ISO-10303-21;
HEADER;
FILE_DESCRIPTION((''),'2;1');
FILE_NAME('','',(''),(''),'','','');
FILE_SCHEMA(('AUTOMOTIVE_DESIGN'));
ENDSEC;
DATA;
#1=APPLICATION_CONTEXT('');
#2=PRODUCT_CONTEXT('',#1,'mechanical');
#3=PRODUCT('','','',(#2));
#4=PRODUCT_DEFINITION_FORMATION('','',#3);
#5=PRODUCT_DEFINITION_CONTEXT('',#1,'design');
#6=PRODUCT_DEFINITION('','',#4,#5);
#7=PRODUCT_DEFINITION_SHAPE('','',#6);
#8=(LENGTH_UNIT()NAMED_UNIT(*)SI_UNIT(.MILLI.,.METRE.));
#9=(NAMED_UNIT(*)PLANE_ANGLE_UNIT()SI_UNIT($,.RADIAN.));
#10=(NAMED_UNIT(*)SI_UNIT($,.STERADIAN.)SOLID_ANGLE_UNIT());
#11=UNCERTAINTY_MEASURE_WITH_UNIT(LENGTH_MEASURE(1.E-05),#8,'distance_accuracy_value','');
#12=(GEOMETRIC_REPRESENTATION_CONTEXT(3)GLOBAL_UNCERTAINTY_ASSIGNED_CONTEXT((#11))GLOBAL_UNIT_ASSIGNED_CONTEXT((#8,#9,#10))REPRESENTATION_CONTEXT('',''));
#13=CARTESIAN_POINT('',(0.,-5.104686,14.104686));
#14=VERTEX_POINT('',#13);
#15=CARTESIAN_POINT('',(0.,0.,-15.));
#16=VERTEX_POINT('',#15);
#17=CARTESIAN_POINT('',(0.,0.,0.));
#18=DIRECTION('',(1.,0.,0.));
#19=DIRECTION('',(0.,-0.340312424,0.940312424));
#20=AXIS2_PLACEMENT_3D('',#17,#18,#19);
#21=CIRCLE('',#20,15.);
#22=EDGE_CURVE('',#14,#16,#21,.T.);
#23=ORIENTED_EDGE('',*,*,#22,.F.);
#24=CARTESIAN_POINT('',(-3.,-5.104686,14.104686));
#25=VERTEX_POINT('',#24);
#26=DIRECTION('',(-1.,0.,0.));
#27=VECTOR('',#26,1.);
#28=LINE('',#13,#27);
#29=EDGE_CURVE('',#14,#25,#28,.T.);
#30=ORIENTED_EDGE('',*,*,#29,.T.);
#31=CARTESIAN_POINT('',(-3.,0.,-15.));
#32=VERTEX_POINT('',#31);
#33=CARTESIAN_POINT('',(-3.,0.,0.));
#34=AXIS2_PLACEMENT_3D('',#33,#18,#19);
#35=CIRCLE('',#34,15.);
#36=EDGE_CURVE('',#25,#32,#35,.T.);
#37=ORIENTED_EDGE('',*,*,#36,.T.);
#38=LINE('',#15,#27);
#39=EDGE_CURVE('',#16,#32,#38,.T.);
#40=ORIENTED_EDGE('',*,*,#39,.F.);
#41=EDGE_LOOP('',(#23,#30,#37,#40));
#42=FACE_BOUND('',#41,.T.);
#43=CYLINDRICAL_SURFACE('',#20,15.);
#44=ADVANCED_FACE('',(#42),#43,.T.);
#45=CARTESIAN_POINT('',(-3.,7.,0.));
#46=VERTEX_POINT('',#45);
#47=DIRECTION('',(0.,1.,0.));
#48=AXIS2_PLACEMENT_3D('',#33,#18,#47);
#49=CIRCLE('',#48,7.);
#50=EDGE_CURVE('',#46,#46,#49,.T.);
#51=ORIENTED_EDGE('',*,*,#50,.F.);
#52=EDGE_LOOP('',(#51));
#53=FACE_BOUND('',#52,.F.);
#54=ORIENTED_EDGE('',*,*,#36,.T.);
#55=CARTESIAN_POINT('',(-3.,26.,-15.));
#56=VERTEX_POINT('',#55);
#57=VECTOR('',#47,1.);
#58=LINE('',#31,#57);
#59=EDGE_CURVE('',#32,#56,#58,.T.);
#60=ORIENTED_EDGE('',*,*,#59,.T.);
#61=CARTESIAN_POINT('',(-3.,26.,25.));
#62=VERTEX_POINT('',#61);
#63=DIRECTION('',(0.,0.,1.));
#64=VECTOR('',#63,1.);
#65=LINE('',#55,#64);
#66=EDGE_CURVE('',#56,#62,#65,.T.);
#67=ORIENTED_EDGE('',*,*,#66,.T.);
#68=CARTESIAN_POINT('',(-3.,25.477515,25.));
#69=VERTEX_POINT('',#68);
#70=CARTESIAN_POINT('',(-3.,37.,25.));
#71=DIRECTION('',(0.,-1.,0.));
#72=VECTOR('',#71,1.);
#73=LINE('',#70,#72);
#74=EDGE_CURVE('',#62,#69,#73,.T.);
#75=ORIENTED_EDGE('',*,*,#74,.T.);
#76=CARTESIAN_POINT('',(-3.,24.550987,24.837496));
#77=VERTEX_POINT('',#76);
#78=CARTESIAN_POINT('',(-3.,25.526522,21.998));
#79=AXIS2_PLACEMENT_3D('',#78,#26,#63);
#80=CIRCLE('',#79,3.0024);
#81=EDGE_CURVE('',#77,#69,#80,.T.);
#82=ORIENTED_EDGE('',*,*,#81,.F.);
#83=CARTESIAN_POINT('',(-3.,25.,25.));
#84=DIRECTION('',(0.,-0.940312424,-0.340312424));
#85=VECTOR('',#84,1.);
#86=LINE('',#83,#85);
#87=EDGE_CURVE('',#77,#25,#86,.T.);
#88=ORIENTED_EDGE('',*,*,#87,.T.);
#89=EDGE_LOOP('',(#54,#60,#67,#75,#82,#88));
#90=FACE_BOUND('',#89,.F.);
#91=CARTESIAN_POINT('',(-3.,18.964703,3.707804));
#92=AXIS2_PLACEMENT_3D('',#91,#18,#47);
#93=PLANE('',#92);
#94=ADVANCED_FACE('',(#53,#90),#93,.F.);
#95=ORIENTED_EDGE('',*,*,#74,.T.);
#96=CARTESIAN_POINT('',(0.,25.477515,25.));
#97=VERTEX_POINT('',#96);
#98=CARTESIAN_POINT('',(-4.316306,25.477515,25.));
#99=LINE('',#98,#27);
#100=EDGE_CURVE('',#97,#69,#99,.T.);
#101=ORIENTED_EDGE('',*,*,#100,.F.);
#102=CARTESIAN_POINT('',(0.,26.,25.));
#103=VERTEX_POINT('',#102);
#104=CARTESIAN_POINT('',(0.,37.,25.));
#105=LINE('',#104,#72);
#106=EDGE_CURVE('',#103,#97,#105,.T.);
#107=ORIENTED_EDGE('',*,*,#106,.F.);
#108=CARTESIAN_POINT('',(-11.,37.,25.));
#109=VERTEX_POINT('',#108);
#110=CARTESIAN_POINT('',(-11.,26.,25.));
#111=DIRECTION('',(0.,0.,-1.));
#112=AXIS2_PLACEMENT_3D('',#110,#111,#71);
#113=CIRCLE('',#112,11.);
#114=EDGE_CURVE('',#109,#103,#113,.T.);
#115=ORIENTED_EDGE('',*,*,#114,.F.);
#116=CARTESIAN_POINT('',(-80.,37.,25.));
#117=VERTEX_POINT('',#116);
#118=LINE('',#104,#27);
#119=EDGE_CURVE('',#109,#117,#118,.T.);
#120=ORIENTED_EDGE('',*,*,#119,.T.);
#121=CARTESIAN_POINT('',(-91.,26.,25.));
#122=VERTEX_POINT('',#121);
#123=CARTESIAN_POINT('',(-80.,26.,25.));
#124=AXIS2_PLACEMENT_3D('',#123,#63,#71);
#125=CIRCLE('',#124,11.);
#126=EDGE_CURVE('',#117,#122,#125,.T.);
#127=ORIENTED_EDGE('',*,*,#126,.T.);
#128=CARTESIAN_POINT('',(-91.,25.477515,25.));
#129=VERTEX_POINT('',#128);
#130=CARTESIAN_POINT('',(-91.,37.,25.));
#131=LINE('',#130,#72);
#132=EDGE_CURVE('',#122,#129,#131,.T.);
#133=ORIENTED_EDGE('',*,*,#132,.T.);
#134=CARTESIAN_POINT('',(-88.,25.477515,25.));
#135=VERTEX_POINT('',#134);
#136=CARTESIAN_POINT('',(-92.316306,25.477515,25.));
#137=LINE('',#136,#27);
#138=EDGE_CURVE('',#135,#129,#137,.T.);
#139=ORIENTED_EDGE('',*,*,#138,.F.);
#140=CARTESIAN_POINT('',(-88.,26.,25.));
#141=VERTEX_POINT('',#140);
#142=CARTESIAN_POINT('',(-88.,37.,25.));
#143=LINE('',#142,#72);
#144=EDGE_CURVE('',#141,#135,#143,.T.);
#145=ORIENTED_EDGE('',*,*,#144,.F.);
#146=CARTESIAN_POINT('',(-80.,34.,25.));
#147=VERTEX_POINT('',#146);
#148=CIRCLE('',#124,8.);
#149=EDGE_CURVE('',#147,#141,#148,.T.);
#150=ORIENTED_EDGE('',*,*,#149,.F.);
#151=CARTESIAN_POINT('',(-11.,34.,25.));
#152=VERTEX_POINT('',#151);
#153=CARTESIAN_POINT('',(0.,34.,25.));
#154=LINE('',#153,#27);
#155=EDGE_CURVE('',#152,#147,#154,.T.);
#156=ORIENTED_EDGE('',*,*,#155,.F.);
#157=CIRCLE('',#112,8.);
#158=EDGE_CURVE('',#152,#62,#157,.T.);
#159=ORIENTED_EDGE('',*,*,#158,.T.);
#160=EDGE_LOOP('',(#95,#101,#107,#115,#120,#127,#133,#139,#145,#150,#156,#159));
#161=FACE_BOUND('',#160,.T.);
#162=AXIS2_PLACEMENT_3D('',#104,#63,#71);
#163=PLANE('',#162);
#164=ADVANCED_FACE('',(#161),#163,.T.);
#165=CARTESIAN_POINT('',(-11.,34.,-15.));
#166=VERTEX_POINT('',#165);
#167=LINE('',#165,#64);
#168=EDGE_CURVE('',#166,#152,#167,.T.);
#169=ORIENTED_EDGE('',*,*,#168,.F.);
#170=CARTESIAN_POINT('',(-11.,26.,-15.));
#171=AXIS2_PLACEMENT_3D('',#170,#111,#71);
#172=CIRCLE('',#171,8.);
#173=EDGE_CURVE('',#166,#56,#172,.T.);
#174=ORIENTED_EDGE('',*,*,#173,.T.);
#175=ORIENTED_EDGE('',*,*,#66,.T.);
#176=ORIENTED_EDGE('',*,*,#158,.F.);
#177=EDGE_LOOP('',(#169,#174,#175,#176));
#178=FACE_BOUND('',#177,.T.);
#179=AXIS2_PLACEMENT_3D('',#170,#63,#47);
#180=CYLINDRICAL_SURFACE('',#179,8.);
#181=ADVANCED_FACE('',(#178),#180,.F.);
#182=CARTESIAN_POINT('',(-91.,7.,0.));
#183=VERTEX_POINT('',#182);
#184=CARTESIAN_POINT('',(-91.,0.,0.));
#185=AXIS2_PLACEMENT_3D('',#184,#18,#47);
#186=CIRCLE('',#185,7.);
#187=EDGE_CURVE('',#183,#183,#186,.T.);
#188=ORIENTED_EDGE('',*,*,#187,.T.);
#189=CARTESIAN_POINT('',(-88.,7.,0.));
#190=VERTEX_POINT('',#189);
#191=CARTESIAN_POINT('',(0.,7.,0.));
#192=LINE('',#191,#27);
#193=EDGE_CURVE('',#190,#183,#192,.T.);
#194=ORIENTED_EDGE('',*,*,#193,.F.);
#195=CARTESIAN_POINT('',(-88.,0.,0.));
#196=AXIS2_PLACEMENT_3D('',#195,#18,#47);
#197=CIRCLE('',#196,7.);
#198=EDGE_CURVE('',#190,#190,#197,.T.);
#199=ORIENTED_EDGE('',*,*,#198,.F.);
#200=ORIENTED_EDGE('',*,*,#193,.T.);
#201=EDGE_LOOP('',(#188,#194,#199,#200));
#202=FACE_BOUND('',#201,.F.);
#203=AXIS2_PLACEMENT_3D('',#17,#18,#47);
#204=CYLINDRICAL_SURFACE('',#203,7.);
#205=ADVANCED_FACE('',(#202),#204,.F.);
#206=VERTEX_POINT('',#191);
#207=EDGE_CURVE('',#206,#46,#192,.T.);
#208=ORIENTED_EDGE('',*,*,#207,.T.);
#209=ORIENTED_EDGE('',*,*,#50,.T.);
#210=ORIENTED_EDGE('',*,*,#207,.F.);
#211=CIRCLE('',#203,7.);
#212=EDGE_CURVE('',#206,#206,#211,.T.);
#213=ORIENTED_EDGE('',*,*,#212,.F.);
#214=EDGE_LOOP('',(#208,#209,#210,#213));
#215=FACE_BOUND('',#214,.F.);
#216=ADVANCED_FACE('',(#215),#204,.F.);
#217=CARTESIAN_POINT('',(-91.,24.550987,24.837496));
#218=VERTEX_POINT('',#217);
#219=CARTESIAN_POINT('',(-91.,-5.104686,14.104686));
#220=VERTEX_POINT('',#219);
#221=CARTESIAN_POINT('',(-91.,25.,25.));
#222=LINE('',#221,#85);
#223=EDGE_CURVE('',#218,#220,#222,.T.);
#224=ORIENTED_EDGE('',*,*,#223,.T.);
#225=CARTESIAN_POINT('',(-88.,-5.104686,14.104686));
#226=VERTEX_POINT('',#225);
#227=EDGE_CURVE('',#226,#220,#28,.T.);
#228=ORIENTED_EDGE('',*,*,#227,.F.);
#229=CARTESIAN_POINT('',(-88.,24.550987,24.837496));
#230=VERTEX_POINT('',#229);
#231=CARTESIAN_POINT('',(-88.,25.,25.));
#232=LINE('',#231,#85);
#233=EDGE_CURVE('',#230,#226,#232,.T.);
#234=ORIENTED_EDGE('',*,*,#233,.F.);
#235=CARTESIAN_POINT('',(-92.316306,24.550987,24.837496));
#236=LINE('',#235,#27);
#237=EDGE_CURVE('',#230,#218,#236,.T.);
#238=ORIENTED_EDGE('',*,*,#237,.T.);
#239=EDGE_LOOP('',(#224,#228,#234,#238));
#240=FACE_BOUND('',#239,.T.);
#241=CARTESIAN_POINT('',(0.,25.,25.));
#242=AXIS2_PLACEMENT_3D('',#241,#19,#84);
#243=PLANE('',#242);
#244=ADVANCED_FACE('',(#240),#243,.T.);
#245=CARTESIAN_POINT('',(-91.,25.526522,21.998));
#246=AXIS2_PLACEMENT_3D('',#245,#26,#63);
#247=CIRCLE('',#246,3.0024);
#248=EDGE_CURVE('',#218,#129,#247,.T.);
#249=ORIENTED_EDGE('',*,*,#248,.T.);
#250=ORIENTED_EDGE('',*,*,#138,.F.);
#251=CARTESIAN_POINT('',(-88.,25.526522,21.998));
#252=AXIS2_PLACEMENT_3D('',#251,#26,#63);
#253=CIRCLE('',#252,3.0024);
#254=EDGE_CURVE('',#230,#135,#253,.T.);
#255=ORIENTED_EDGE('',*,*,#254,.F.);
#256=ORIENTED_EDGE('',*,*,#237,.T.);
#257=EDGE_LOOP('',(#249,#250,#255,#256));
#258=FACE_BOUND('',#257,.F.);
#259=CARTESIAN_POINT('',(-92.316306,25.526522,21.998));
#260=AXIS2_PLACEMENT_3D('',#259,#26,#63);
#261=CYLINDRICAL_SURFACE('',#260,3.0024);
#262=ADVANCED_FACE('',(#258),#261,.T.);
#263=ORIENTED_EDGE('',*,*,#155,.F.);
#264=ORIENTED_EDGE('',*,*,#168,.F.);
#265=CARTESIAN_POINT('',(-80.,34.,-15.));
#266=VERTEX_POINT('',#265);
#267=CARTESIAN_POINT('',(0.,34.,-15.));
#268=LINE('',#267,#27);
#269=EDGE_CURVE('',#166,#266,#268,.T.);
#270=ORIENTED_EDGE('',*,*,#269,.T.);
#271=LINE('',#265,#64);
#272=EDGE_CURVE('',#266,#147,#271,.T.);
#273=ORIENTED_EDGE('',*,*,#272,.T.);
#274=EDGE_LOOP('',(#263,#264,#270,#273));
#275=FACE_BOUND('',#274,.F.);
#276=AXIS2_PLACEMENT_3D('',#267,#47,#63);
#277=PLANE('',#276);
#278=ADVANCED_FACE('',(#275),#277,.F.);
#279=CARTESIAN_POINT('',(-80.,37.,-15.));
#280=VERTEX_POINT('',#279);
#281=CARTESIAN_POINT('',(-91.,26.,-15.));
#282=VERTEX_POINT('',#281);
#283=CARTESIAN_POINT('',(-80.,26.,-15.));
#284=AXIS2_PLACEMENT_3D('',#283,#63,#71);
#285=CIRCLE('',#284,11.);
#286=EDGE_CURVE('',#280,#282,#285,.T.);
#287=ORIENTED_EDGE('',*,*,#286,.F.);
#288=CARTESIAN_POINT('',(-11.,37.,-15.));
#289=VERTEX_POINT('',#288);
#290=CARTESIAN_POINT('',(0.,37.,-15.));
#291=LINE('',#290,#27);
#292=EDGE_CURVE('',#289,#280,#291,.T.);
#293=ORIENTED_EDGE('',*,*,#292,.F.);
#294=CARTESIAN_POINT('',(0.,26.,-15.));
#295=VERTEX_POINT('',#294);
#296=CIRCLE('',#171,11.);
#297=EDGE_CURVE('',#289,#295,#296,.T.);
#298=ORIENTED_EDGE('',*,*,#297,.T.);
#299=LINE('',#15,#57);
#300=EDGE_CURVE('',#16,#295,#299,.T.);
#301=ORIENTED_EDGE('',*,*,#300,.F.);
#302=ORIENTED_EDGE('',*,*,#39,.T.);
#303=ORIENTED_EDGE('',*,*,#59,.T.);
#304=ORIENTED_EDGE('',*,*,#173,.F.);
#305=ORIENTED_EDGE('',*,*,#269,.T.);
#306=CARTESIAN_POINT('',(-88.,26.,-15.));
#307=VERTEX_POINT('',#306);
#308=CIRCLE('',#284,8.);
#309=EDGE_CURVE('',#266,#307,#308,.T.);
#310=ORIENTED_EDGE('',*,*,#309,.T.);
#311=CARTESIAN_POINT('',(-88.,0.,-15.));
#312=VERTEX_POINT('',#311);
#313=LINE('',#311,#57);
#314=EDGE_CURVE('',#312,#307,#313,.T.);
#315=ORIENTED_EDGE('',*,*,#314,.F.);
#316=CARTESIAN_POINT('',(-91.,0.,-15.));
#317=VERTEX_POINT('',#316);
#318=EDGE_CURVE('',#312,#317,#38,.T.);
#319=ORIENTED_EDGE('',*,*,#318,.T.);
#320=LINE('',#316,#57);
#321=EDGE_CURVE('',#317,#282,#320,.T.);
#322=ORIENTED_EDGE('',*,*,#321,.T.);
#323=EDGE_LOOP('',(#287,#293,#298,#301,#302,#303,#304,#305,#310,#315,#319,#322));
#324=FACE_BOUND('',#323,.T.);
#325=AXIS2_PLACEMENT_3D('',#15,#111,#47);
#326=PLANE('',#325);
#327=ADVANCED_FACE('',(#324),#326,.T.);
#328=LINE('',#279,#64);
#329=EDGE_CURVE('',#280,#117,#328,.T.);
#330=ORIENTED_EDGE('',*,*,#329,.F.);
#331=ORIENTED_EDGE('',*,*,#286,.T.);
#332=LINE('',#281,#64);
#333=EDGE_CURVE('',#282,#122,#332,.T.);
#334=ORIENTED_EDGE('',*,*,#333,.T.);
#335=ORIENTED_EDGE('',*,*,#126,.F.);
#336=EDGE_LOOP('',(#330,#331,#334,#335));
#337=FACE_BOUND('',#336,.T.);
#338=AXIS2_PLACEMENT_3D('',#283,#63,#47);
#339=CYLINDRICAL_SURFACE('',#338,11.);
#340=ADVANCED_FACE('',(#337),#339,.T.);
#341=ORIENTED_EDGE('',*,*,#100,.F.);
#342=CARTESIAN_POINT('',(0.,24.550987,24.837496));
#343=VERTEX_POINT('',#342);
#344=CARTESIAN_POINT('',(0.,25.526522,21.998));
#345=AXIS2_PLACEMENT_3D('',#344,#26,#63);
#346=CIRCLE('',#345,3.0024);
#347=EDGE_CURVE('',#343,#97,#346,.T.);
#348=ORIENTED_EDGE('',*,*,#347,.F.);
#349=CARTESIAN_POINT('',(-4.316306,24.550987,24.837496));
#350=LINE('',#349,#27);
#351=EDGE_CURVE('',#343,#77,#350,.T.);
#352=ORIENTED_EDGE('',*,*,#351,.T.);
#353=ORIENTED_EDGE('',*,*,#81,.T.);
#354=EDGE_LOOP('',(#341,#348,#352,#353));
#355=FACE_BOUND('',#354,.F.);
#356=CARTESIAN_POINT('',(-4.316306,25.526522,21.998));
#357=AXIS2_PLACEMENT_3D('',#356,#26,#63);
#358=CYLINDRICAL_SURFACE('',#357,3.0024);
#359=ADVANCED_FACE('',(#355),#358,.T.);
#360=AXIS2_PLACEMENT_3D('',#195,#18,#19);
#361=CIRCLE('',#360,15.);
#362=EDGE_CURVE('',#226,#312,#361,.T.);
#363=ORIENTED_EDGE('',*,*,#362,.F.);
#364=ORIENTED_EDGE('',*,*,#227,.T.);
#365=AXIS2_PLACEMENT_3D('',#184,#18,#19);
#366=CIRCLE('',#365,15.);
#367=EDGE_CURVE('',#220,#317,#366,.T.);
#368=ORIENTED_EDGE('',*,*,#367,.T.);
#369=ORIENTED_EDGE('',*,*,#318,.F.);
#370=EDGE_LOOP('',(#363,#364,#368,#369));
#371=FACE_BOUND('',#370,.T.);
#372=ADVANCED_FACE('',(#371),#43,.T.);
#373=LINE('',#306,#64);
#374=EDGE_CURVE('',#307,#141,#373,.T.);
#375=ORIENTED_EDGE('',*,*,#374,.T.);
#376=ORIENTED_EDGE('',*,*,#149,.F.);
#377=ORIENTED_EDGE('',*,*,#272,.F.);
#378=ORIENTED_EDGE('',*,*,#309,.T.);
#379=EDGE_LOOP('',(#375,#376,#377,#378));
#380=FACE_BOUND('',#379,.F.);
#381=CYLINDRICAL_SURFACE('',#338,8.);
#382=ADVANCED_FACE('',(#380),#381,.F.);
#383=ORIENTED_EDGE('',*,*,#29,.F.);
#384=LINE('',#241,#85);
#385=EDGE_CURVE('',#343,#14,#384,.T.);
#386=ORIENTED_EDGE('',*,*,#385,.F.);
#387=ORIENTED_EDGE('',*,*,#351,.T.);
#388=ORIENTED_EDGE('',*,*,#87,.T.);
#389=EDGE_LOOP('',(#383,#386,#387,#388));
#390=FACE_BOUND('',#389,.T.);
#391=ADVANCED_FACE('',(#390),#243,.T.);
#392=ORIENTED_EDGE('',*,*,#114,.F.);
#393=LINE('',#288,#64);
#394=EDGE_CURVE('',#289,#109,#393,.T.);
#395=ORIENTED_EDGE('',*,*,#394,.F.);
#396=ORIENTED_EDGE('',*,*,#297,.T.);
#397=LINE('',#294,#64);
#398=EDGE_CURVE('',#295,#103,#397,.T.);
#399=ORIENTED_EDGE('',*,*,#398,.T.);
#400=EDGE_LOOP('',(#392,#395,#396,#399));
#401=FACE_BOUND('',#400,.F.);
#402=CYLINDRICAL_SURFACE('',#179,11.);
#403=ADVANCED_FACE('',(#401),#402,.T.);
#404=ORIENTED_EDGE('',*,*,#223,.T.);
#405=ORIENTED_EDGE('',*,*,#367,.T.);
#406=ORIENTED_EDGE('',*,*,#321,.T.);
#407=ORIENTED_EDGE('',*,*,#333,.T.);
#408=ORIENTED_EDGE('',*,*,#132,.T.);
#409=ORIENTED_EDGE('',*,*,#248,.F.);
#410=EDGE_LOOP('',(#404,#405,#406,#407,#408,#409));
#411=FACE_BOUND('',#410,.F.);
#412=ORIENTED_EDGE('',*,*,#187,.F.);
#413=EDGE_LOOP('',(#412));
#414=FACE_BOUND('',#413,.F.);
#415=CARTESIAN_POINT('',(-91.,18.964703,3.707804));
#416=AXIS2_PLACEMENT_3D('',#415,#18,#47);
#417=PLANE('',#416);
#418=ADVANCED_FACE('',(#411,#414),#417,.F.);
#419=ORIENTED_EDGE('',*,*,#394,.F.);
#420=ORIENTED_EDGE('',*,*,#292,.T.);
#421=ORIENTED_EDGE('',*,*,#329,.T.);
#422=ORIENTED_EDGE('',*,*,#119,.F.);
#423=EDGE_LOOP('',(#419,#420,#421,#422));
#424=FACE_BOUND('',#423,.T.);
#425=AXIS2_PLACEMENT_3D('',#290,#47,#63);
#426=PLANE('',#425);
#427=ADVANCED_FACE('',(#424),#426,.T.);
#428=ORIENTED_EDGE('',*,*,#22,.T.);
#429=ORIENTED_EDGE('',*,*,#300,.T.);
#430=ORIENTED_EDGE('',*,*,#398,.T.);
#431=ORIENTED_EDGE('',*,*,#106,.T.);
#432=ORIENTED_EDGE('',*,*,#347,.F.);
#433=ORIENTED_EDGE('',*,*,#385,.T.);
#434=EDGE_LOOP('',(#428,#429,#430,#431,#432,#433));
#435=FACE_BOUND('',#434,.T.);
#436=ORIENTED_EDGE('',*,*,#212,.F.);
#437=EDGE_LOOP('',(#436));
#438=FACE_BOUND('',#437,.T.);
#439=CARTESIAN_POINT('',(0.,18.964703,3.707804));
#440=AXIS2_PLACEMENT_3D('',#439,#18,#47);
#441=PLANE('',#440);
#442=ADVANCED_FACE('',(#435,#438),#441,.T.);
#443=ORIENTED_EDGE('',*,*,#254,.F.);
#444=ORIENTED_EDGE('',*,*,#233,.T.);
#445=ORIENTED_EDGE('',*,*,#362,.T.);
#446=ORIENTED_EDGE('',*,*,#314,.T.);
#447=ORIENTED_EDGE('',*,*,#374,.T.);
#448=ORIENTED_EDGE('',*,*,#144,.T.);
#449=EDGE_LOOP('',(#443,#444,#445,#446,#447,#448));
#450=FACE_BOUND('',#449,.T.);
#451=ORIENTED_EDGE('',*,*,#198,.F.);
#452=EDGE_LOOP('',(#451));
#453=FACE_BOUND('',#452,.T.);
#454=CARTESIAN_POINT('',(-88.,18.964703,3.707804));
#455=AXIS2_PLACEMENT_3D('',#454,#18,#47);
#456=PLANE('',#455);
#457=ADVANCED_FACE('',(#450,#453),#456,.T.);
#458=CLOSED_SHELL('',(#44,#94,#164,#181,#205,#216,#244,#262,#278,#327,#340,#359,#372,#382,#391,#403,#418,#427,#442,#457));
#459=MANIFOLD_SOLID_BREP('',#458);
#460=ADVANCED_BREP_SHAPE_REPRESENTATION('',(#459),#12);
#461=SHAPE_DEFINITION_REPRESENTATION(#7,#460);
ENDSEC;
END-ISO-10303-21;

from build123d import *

# Parameters (mm, degrees)
F0_R        = 7
F1_DEPTH    = 91
F2_R        = 11
F3_T        = -3
F4_DEPTH    = 100
F5_T1_DEPTH = 5.6326126102
F5_T3_DEPTH = 5.6326126102


# Not quite as in the source:
# - a fillet or chamfer that OpenCascade refuses, or shapes differently, is made with other operations: its cross-section is extruded or revolved along the edge and cut away or added


with BuildPart() as f1:
    # F0 (on Right) → F1 (new body)
    with BuildSketch(Plane.YZ):
        with BuildLine():
            ThreePointArc((-5.1046863561, 14.1046863561), (8.6148042537, 12.2794603982), (15, 0))
            ThreePointArc((15, 0), (10.6066017178, -10.6066017178), (0, -15))
            Line((0, -15), (37, -15))
            Line((37, -15), (37, 25))
            Line((37, 25), (25, 25))
            Line((25, 25), (-5.1046863561, 14.1046863561))
        make_face()
        with BuildLine():
            ThreePointArc((0, -15), (10.6066017178, -10.6066017178), (15, 0))
            ThreePointArc((15, 0), (8.6148042537, 12.2794603982), (-5.1046863561, 14.1046863561))
            ThreePointArc((-5.1046863561, 14.1046863561), (-14.7744762232, -2.5913032105), (0, -15))
        make_face()
        Circle(F0_R, mode=Mode.SUBTRACT)
        Circle(F0_R)
    extrude(amount=-F1_DEPTH)

    # F2
    f2_edges = [f1.edges().sort_by_distance(p)[0] for p in [
        (0, 37, 5),
        (-91, 37, 5),
    ]]
    fillet(f2_edges, radius=F2_R)

    # F3
    f3_openings = [f1.faces().sort_by_distance(p)[0] for p in [
        (-45.5, -14.774476, -2.591303),
        (-45.5, 18.248672, -15),
        (-45.5, 9.947657, 19.552343),
        (-45.5, 30.82309, 25),
    ]]
    offset(amount=F3_T, openings=f3_openings)

    # F0 (on Right) → F4 (cut)
    with BuildSketch(Plane.YZ):
        Circle(F0_R)
    extrude(amount=-F4_DEPTH, mode=Mode.SUBTRACT)

    # F5: fillet of radius 3 on 4 edges, made by hand

    # F5_s2 → F5_t1 (cut)
    with BuildSketch(Plane.YZ.offset(-4.3163063051)):
        with BuildLine():
            ThreePointArc((25.5265223701, 25.0004), (25.0078471195, 24.9552591608), (24.504768349, 24.821194021))
            Line((24.504768349, 24.821194021), (24.4025929469, 25.1035134232))
            ThreePointArc((24.4025929469, 25.1035134232), (24.6502768349, 25.1927283501), (24.8978245979, 25.2823194021))
            Line((24.8978245979, 25.2823194021), (25, 25.30024))
            ThreePointArc((25, 25.30024), (25.263261185, 25.30024), (25.5265223701, 25.30064))
            Line((25.5265223701, 25.30064), (25.5265223701, 25.0004))
        make_face()
    extrude(amount=F5_T1_DEPTH, mode=Mode.SUBTRACT)

    # F5_s4 → F5_t3 (cut)
    with BuildSketch(Plane.YZ.offset(-92.3163063051)):
        with BuildLine():
            ThreePointArc((25.5265223701, 25.0004), (25.0078471195, 24.9552591608), (24.504768349, 24.821194021))
            Line((24.504768349, 24.821194021), (24.4025929469, 25.1035134232))
            ThreePointArc((24.4025929469, 25.1035134232), (24.6502768349, 25.1927283501), (24.8978245979, 25.2823194021))
            Line((24.8978245979, 25.2823194021), (25, 25.30024))
            ThreePointArc((25, 25.30024), (25.263261185, 25.30024), (25.5265223701, 25.30064))
            Line((25.5265223701, 25.30064), (25.5265223701, 25.0004))
        make_face()
    extrude(amount=F5_T3_DEPTH, mode=Mode.SUBTRACT)


solid = f1.part
